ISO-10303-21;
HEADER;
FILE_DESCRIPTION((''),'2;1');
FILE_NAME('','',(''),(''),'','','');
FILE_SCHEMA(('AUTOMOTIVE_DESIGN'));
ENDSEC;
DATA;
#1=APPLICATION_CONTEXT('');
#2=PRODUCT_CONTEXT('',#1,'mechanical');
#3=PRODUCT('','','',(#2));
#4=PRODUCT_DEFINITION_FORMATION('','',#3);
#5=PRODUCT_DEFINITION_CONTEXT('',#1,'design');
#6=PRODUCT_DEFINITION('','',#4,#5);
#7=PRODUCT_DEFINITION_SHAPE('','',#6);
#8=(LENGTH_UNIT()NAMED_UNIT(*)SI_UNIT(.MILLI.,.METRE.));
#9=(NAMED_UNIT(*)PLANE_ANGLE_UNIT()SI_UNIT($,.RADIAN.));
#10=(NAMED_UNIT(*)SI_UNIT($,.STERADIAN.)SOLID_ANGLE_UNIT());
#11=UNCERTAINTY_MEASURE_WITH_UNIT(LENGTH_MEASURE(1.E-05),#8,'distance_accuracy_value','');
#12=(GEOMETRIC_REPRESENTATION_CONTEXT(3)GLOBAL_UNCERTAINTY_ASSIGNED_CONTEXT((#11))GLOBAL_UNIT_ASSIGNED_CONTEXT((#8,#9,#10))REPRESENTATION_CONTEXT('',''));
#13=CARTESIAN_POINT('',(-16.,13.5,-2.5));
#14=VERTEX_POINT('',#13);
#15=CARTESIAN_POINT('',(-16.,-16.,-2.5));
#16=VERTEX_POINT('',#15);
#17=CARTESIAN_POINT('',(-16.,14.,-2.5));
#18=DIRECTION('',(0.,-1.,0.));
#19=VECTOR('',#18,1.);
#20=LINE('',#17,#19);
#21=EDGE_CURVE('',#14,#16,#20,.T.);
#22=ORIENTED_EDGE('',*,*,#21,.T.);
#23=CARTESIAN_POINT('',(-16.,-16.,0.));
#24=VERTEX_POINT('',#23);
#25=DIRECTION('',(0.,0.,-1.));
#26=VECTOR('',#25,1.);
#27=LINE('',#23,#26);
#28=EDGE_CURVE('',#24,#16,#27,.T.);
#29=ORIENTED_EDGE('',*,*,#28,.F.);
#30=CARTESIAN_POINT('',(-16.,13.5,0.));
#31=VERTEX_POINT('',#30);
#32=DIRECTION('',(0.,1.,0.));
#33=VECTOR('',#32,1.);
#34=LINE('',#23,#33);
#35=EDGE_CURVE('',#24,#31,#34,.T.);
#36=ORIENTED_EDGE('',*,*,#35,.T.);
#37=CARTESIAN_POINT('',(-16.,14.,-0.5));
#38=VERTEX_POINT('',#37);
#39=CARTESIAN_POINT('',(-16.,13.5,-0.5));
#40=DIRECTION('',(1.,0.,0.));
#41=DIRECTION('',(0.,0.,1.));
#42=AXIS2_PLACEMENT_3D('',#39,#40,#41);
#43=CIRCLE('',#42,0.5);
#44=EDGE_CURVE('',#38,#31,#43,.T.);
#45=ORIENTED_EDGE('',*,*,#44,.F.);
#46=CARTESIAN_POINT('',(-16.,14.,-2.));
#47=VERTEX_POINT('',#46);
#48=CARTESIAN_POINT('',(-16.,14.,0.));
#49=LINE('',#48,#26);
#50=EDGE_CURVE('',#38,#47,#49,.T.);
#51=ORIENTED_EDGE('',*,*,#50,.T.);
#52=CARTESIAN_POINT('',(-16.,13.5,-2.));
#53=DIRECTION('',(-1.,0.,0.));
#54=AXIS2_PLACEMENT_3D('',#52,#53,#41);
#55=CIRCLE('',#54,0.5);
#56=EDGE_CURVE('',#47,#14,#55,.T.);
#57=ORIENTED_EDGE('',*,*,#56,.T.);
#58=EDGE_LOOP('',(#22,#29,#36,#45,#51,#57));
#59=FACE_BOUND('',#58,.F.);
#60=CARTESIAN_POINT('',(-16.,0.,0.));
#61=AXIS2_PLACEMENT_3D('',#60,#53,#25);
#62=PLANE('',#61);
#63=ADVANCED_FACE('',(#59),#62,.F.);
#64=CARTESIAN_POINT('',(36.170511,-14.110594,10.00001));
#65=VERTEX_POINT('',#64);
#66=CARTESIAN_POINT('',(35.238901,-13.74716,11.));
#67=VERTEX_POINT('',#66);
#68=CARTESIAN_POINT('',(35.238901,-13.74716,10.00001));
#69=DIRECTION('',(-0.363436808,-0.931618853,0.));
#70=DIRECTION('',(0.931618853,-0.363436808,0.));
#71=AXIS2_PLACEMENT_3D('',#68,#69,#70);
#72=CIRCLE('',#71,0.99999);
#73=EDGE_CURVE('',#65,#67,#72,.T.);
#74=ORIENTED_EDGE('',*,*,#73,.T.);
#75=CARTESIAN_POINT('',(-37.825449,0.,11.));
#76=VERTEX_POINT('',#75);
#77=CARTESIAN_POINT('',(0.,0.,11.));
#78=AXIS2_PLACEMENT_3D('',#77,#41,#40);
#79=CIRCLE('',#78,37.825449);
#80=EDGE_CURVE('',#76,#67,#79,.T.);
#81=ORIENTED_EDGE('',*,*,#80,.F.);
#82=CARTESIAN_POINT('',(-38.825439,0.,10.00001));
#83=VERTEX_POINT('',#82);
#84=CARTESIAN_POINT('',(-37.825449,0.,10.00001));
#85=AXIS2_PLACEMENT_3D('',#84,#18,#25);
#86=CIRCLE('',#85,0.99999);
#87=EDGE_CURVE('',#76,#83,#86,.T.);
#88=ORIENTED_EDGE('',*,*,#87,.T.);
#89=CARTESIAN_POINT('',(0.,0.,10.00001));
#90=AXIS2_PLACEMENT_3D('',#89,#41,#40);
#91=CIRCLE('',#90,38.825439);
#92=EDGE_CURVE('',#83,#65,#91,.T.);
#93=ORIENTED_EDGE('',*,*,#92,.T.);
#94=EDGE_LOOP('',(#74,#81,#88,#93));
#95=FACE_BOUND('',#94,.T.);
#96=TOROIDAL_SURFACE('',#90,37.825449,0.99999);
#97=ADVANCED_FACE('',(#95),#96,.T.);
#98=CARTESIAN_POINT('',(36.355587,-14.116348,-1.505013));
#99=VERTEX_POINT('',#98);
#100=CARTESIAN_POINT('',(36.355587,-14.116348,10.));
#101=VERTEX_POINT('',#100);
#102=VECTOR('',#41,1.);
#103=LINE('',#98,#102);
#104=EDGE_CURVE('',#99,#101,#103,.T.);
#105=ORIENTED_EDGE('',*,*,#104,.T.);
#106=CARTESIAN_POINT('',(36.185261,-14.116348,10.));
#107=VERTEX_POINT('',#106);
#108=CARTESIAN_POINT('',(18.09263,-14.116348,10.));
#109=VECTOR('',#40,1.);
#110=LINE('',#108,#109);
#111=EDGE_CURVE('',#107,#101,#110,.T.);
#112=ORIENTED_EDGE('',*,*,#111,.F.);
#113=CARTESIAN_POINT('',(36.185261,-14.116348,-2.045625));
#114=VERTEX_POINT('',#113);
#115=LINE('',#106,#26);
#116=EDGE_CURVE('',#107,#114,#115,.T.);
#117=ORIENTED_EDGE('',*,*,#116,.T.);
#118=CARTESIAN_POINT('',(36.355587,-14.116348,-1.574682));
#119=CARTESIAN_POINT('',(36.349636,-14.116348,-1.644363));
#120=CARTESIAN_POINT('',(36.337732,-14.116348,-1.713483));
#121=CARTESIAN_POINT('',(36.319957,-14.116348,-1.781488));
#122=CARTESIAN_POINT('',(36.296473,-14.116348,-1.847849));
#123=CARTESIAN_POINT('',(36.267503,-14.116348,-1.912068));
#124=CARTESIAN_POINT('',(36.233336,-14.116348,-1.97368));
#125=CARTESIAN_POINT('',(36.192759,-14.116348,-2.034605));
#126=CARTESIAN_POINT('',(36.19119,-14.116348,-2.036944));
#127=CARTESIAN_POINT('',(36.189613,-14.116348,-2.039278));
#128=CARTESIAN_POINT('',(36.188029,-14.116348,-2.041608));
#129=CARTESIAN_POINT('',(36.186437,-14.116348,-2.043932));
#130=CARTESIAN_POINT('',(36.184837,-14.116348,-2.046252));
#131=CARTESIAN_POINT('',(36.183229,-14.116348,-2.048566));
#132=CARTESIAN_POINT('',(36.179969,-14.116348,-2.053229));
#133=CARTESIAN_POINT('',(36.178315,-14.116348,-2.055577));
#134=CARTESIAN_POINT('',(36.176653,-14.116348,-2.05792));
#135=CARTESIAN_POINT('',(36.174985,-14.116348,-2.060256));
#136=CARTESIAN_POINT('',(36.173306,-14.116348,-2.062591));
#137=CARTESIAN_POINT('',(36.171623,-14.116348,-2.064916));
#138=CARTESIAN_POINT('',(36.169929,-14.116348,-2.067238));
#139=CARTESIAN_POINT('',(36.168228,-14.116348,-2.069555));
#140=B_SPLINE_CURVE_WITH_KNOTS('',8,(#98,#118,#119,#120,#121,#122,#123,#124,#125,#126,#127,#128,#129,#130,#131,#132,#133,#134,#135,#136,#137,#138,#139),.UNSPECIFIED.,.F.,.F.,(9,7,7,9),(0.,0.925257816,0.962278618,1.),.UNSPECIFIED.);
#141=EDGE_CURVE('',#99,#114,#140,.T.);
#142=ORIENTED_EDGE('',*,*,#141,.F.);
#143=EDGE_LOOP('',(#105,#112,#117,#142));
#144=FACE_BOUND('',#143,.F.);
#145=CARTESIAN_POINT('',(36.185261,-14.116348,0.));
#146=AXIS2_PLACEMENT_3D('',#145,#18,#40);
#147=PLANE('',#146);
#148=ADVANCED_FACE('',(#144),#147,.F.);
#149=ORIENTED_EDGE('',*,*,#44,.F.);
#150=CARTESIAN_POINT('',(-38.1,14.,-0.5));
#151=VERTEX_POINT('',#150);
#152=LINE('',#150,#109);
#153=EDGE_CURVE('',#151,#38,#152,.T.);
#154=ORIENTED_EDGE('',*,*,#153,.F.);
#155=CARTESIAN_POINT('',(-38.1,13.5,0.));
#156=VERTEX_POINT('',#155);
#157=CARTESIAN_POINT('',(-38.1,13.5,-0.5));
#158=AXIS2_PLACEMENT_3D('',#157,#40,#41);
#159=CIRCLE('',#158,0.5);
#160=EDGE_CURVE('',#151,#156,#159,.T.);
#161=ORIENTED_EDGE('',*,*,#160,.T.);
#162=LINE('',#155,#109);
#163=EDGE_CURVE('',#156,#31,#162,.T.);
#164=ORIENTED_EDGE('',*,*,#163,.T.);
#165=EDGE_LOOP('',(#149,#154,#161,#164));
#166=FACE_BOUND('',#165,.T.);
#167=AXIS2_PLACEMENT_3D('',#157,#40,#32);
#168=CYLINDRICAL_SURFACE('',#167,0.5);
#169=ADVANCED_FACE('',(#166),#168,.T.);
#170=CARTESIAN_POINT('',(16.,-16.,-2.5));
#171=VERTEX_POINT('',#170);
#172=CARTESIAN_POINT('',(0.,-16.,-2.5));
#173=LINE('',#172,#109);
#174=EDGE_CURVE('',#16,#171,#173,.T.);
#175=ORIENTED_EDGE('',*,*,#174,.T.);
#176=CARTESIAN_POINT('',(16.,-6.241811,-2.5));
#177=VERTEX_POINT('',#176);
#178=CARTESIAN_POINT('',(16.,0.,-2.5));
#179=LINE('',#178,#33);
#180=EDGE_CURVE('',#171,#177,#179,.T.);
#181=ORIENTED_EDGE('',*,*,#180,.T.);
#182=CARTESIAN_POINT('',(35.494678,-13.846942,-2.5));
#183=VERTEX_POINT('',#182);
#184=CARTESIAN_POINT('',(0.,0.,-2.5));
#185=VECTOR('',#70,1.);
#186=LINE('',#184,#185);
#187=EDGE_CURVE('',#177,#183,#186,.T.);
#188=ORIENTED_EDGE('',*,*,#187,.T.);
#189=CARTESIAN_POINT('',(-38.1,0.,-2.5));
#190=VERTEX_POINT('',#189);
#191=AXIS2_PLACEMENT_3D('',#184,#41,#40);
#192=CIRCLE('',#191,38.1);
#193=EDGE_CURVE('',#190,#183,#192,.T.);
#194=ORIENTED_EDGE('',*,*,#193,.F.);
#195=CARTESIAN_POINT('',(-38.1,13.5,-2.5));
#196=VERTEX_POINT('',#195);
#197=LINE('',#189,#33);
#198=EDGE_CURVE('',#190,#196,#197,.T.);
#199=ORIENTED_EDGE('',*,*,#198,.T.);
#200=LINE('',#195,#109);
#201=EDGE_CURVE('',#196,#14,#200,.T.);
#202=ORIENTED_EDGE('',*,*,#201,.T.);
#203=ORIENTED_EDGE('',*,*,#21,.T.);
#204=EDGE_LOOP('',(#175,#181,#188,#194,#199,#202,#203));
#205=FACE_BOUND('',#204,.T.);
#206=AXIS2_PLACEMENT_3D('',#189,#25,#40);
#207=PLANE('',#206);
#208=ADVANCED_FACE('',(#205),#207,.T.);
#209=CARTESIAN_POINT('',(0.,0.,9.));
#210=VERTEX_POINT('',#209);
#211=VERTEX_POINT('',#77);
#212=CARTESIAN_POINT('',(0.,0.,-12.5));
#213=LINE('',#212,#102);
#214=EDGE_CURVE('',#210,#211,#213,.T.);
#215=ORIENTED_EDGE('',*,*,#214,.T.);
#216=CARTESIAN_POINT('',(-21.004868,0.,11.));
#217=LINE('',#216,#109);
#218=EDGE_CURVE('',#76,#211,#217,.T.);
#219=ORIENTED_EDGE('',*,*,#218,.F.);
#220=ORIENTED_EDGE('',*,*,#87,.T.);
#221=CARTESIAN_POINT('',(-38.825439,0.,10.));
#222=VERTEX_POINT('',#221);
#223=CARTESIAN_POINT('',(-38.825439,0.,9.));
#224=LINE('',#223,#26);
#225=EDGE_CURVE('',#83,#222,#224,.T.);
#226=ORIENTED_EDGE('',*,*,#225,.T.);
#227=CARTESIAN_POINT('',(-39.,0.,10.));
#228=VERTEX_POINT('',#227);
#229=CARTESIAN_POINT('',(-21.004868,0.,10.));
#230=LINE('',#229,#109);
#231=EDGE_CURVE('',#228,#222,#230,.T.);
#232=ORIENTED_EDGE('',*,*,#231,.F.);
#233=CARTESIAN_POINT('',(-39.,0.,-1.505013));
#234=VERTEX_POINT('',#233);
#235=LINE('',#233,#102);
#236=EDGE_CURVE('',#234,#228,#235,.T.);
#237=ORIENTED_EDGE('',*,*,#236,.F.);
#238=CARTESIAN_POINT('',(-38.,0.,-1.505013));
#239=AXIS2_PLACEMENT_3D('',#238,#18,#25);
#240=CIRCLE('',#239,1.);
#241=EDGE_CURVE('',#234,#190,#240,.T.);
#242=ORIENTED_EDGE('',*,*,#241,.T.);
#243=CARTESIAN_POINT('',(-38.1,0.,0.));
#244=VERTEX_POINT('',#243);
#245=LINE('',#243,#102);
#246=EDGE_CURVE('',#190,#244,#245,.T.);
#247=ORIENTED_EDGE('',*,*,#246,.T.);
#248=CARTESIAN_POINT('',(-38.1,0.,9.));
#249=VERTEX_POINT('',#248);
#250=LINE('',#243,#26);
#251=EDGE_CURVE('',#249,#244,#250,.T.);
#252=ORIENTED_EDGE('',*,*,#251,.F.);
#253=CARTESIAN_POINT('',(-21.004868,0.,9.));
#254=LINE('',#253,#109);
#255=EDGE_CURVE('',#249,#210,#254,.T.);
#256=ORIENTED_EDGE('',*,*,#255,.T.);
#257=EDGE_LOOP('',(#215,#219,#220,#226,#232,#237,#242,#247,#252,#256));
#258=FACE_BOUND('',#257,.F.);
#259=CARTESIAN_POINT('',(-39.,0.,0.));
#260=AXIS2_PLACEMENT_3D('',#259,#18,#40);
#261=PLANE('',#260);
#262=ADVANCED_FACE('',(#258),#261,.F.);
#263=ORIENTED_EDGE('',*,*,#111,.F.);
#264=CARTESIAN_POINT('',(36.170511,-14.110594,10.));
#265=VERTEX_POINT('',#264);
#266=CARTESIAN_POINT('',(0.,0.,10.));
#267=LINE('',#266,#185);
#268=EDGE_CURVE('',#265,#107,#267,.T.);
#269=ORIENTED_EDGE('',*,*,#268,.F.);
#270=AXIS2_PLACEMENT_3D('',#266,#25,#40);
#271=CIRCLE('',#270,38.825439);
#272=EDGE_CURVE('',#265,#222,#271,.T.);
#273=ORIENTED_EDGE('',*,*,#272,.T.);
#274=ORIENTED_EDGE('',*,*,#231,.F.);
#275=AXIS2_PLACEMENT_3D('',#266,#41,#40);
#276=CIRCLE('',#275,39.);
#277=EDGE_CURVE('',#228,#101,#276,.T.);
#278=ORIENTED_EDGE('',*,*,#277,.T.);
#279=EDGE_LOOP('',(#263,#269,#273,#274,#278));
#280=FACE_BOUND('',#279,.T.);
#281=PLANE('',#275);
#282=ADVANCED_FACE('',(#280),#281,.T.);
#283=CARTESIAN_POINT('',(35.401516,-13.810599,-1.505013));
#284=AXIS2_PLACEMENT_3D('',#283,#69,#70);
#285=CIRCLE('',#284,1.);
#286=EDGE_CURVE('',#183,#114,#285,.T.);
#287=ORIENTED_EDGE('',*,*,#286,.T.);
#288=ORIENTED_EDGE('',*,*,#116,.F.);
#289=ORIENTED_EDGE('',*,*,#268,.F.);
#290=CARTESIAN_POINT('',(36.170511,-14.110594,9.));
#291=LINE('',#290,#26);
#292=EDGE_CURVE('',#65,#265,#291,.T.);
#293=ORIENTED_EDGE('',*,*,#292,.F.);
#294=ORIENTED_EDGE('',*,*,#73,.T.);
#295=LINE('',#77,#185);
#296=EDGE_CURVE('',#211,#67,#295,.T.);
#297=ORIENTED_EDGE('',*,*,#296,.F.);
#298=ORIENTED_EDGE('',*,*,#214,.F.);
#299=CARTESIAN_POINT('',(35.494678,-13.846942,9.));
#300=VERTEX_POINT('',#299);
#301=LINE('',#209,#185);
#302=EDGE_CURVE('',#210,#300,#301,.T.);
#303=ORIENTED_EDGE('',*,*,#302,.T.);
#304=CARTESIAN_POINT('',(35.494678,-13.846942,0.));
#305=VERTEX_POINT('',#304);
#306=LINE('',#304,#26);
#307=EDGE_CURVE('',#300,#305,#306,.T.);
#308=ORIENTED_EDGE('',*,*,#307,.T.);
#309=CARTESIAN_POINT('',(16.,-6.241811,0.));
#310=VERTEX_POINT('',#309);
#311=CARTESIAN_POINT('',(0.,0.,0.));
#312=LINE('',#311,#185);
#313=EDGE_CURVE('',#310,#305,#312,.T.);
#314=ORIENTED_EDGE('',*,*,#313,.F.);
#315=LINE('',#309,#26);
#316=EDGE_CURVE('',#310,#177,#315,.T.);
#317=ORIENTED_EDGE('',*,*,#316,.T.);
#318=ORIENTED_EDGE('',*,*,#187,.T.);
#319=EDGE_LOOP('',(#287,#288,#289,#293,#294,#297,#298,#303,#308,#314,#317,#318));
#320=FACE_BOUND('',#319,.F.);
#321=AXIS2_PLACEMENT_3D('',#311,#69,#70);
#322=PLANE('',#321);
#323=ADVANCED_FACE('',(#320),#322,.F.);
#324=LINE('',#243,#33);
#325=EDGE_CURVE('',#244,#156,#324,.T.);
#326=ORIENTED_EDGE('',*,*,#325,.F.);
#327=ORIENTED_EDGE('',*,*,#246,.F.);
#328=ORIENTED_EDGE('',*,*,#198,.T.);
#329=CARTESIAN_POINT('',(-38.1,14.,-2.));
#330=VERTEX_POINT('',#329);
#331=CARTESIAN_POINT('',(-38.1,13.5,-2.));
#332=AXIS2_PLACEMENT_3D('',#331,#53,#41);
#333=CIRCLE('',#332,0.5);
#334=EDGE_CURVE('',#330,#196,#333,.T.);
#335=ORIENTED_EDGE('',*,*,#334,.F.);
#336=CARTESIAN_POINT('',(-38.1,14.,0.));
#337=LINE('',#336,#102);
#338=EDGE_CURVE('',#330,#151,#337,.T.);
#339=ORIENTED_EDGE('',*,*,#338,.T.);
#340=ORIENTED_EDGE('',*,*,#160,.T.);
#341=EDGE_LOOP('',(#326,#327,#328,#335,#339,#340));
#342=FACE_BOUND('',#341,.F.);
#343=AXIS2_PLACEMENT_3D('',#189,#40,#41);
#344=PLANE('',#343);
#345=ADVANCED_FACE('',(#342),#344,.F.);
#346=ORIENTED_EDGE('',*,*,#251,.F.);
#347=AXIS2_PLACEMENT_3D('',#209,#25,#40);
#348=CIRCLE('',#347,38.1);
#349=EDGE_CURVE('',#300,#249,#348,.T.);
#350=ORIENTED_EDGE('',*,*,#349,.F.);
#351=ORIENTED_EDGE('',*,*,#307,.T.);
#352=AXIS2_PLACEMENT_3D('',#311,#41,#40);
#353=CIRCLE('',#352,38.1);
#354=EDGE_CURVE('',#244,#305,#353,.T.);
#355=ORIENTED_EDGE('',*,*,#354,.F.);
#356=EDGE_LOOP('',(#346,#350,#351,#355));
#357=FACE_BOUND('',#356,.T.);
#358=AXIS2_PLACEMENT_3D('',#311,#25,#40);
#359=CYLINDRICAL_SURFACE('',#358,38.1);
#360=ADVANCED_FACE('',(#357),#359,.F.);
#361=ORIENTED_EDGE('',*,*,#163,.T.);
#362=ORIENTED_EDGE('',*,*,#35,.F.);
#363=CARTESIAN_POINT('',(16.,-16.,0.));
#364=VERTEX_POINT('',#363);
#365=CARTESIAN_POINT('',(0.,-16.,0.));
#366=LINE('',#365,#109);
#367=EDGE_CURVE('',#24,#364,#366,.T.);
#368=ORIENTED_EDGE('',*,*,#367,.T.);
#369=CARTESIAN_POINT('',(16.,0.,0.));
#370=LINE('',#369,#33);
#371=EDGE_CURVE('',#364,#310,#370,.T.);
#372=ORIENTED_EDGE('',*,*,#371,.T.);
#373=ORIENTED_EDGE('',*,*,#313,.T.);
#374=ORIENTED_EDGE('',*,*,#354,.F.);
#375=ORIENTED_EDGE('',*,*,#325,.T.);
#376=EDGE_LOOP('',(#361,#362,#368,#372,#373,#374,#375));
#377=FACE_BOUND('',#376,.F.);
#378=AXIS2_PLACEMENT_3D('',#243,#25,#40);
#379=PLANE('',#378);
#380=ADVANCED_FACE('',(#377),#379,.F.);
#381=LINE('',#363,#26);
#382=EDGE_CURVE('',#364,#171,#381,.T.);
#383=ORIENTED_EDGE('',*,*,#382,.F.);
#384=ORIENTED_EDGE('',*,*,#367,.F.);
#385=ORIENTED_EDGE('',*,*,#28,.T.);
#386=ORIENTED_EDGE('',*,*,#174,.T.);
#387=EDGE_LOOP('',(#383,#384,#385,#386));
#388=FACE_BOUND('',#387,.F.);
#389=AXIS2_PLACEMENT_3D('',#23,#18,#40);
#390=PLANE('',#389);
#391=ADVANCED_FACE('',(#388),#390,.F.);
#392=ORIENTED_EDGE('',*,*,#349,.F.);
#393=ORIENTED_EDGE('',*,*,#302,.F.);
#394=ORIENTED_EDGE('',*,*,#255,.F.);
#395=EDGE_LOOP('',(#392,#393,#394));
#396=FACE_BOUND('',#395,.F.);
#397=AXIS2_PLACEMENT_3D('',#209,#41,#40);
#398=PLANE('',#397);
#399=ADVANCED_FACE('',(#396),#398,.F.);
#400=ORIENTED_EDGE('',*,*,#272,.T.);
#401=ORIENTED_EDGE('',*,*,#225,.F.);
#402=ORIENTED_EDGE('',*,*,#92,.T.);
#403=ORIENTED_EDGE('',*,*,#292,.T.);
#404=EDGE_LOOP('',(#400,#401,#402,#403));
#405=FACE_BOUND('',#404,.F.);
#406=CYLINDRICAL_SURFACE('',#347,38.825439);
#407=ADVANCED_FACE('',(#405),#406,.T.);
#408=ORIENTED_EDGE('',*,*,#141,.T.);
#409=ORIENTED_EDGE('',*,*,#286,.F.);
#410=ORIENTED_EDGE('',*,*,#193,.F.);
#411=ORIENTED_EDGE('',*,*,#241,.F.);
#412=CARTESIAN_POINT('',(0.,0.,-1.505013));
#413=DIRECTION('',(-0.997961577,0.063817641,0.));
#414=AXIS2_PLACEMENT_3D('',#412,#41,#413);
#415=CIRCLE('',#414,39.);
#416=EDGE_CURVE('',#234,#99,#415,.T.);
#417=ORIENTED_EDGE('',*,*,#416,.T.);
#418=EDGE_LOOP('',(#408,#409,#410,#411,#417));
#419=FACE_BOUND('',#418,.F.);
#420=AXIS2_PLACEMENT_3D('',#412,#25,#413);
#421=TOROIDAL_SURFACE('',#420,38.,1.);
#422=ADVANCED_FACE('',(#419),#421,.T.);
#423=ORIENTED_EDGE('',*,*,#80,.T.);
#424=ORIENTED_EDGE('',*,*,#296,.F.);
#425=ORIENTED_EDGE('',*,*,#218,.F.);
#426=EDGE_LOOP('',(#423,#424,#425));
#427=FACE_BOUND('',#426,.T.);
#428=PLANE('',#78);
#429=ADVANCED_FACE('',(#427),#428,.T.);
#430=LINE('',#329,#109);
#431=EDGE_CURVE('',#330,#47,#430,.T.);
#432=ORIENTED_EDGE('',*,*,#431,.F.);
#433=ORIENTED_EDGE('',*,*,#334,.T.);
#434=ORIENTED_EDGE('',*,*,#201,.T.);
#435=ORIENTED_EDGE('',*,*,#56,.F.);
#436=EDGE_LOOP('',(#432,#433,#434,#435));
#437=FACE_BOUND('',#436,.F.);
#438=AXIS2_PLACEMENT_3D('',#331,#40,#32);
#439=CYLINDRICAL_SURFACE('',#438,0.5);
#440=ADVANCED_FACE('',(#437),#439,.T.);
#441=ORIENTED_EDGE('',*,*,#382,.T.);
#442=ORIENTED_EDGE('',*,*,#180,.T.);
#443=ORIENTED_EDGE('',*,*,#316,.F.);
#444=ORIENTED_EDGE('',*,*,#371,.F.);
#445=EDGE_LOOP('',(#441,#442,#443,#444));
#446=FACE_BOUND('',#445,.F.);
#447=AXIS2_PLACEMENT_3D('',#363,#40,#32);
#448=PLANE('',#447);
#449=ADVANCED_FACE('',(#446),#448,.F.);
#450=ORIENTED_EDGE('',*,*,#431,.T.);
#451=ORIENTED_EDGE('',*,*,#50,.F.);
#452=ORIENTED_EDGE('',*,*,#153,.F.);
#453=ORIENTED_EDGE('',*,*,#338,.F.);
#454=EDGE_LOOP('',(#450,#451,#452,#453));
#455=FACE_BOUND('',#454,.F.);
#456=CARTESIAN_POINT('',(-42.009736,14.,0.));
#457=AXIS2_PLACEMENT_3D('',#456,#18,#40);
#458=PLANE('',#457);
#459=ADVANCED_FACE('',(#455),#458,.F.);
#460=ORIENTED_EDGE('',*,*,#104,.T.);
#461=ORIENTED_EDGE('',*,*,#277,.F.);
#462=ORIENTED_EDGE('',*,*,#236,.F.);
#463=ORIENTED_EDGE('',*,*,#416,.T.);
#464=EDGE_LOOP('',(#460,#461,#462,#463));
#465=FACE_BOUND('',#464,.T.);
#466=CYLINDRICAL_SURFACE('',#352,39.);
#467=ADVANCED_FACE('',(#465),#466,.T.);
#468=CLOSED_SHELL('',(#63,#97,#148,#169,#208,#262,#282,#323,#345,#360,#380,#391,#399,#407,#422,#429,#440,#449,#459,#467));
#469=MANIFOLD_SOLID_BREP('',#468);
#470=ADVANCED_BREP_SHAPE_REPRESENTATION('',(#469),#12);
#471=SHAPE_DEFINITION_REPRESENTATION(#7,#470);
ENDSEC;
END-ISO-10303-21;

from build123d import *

# Parameters (mm, degrees)
F0_R         = 39
F0_R_2       = 38.1
F1_DEPTH     = 9
F2_DEPTH     = 10
F0_W         = 32
F0_H         = 32
F3_DEPTH     = 2.5
F5_R         = 38.8254389769
F6_DEPTH     = 2
F7_R         = 0.99999
F9_DEPTH     = 12.5
F10_DEPTH    = 12.5
F11_DEPTH    = 2.5
F12_T2_ANGLE = 166.0974661722
F13_DEPTH    = 14
F14_R        = 0.5


# Not quite as in the source:
# - a fillet or chamfer that OpenCascade refuses, or shapes differently, is made with other operations: its cross-section is extruded or revolved along the edge and cut away or added
# - a fillet or chamfer is up to 0.001 mm smaller than in the source, because OpenCascade refuses the exact size


with BuildPart() as f1:
    # F0 (on Top) → F1 (new body)
    with BuildSketch(Plane.XY):
        Circle(F0_R)
        Circle(F0_R_2, mode=Mode.SUBTRACT)
    extrude(amount=F1_DEPTH)

    # F0 (on Top) → F2 (join)
    with BuildSketch(Plane.XY):
        Circle(F0_R)
        Circle(F0_R_2, mode=Mode.SUBTRACT)
    extrude(amount=F2_DEPTH)

    # F5 (on offset) → F6 (join)
    with BuildSketch(Plane.XY.offset(9)):
        Circle(F5_R)
    extrude(amount=F6_DEPTH)

    # F7 (radius 1 in the source; OpenCascade refuses exactly that, so slightly less here)
    f7_edges = [f1.edges().sort_by_distance(p)[0] for p in [
        (-38.825439, 0, 11),
    ]]
    fillet(f7_edges, radius=F7_R)


with BuildPart() as f3:
    # F0 (on Top) → F3 (new body)
    with BuildSketch(Plane.XY):
        Circle(F0_R_2)
        Rectangle(F0_W, F0_H, mode=Mode.SUBTRACT)
    extrude(amount=-F3_DEPTH)


with BuildPart() as f9:
    # F8 (on Top) → F9 (new body, symmetric)
    with BuildSketch(Plane.XY):
        Polygon((-41.2051826715, 48.0051673949), (-42.0097357945, 0), (0, 0), (36.1852608621, -14.1163477674), (49.7808791697, -14.1163477674), (49.2908842862, 48.0051673949), align=None)
    extrude(amount=F9_DEPTH, both=True)


with BuildPart() as f10_tool:
    # F8 (on Top) → F10 (new body, symmetric)
    with BuildSketch(Plane.XY):
        Polygon((-41.2051826715, 48.0051673949), (-42.0097357945, 0), (0, 0), (36.1852608621, -14.1163477674), (49.7808791697, -14.1163477674), (49.2908842862, 48.0051673949), align=None)
    extrude(amount=F10_DEPTH, both=True)


with BuildPart() as f1_1:
    add(f1.part)

    # F10: cut by f10_tool
    add(f10_tool.part, mode=Mode.SUBTRACT)


with BuildPart() as f3_1:
    add(f3.part)

    # F10: cut by f10_tool
    add(f10_tool.part, mode=Mode.SUBTRACT)


with BuildPart() as f9_1:
    add(f9.part)

    # F10: cut by f10_tool
    add(f10_tool.part, mode=Mode.SUBTRACT)


with BuildPart() as f11:
    # F11 (new): a face of the model
    f11_faces = [f1_1.part.faces().sort_by_distance(p)[0] for p in [
        (-38.55, -0.8484965841, 0),
    ]]
    extrude(f11_faces, amount=F11_DEPTH)

    # F12: fillet of radius 1 on 1 edges, made by hand

    # F12_s1 → F12_t2 (revolve, cut)
    with BuildSketch(Plane(origin=(0, 0, 0), x_dir=(0, 0, 1), z_dir=(0.0638176413, 0.9979615767, 0))):
        with BuildLine():
            ThreePointArc((-1.5050125629, -39), (-2.1758329561, -38.7416198487), (-2.5, -38.1))
            Line((-2.5, -38.1), (-2.5, -39))
            Line((-2.5, -39), (-1.5050125629, -39))
        make_face()
    revolve(axis=Axis((0, 0, -2.5), (0, 0, 1)), revolution_arc=F12_T2_ANGLE, mode=Mode.SUBTRACT)


with BuildPart() as f1_2:
    add(f1_1.part)

    # F13 (add): a face of the model
    f13_faces = [f3_1.part.faces().sort_by_distance(p)[0] for p in [
        (-27.05, 0, -1.25),
    ]]

    add(f3_1.part)  # F13 merges F3

    add(f11.part)  # F13 merges F11
    extrude(f13_faces, amount=F13_DEPTH)

    # F14
    f14_edges = [f1_2.edges().sort_by_distance(p)[0] for p in [
        (-27.05, 14, -2.5),
        (-27.05, 14, 0),
    ]]
    fillet(f14_edges, radius=F14_R)


solid = f1_2.part
